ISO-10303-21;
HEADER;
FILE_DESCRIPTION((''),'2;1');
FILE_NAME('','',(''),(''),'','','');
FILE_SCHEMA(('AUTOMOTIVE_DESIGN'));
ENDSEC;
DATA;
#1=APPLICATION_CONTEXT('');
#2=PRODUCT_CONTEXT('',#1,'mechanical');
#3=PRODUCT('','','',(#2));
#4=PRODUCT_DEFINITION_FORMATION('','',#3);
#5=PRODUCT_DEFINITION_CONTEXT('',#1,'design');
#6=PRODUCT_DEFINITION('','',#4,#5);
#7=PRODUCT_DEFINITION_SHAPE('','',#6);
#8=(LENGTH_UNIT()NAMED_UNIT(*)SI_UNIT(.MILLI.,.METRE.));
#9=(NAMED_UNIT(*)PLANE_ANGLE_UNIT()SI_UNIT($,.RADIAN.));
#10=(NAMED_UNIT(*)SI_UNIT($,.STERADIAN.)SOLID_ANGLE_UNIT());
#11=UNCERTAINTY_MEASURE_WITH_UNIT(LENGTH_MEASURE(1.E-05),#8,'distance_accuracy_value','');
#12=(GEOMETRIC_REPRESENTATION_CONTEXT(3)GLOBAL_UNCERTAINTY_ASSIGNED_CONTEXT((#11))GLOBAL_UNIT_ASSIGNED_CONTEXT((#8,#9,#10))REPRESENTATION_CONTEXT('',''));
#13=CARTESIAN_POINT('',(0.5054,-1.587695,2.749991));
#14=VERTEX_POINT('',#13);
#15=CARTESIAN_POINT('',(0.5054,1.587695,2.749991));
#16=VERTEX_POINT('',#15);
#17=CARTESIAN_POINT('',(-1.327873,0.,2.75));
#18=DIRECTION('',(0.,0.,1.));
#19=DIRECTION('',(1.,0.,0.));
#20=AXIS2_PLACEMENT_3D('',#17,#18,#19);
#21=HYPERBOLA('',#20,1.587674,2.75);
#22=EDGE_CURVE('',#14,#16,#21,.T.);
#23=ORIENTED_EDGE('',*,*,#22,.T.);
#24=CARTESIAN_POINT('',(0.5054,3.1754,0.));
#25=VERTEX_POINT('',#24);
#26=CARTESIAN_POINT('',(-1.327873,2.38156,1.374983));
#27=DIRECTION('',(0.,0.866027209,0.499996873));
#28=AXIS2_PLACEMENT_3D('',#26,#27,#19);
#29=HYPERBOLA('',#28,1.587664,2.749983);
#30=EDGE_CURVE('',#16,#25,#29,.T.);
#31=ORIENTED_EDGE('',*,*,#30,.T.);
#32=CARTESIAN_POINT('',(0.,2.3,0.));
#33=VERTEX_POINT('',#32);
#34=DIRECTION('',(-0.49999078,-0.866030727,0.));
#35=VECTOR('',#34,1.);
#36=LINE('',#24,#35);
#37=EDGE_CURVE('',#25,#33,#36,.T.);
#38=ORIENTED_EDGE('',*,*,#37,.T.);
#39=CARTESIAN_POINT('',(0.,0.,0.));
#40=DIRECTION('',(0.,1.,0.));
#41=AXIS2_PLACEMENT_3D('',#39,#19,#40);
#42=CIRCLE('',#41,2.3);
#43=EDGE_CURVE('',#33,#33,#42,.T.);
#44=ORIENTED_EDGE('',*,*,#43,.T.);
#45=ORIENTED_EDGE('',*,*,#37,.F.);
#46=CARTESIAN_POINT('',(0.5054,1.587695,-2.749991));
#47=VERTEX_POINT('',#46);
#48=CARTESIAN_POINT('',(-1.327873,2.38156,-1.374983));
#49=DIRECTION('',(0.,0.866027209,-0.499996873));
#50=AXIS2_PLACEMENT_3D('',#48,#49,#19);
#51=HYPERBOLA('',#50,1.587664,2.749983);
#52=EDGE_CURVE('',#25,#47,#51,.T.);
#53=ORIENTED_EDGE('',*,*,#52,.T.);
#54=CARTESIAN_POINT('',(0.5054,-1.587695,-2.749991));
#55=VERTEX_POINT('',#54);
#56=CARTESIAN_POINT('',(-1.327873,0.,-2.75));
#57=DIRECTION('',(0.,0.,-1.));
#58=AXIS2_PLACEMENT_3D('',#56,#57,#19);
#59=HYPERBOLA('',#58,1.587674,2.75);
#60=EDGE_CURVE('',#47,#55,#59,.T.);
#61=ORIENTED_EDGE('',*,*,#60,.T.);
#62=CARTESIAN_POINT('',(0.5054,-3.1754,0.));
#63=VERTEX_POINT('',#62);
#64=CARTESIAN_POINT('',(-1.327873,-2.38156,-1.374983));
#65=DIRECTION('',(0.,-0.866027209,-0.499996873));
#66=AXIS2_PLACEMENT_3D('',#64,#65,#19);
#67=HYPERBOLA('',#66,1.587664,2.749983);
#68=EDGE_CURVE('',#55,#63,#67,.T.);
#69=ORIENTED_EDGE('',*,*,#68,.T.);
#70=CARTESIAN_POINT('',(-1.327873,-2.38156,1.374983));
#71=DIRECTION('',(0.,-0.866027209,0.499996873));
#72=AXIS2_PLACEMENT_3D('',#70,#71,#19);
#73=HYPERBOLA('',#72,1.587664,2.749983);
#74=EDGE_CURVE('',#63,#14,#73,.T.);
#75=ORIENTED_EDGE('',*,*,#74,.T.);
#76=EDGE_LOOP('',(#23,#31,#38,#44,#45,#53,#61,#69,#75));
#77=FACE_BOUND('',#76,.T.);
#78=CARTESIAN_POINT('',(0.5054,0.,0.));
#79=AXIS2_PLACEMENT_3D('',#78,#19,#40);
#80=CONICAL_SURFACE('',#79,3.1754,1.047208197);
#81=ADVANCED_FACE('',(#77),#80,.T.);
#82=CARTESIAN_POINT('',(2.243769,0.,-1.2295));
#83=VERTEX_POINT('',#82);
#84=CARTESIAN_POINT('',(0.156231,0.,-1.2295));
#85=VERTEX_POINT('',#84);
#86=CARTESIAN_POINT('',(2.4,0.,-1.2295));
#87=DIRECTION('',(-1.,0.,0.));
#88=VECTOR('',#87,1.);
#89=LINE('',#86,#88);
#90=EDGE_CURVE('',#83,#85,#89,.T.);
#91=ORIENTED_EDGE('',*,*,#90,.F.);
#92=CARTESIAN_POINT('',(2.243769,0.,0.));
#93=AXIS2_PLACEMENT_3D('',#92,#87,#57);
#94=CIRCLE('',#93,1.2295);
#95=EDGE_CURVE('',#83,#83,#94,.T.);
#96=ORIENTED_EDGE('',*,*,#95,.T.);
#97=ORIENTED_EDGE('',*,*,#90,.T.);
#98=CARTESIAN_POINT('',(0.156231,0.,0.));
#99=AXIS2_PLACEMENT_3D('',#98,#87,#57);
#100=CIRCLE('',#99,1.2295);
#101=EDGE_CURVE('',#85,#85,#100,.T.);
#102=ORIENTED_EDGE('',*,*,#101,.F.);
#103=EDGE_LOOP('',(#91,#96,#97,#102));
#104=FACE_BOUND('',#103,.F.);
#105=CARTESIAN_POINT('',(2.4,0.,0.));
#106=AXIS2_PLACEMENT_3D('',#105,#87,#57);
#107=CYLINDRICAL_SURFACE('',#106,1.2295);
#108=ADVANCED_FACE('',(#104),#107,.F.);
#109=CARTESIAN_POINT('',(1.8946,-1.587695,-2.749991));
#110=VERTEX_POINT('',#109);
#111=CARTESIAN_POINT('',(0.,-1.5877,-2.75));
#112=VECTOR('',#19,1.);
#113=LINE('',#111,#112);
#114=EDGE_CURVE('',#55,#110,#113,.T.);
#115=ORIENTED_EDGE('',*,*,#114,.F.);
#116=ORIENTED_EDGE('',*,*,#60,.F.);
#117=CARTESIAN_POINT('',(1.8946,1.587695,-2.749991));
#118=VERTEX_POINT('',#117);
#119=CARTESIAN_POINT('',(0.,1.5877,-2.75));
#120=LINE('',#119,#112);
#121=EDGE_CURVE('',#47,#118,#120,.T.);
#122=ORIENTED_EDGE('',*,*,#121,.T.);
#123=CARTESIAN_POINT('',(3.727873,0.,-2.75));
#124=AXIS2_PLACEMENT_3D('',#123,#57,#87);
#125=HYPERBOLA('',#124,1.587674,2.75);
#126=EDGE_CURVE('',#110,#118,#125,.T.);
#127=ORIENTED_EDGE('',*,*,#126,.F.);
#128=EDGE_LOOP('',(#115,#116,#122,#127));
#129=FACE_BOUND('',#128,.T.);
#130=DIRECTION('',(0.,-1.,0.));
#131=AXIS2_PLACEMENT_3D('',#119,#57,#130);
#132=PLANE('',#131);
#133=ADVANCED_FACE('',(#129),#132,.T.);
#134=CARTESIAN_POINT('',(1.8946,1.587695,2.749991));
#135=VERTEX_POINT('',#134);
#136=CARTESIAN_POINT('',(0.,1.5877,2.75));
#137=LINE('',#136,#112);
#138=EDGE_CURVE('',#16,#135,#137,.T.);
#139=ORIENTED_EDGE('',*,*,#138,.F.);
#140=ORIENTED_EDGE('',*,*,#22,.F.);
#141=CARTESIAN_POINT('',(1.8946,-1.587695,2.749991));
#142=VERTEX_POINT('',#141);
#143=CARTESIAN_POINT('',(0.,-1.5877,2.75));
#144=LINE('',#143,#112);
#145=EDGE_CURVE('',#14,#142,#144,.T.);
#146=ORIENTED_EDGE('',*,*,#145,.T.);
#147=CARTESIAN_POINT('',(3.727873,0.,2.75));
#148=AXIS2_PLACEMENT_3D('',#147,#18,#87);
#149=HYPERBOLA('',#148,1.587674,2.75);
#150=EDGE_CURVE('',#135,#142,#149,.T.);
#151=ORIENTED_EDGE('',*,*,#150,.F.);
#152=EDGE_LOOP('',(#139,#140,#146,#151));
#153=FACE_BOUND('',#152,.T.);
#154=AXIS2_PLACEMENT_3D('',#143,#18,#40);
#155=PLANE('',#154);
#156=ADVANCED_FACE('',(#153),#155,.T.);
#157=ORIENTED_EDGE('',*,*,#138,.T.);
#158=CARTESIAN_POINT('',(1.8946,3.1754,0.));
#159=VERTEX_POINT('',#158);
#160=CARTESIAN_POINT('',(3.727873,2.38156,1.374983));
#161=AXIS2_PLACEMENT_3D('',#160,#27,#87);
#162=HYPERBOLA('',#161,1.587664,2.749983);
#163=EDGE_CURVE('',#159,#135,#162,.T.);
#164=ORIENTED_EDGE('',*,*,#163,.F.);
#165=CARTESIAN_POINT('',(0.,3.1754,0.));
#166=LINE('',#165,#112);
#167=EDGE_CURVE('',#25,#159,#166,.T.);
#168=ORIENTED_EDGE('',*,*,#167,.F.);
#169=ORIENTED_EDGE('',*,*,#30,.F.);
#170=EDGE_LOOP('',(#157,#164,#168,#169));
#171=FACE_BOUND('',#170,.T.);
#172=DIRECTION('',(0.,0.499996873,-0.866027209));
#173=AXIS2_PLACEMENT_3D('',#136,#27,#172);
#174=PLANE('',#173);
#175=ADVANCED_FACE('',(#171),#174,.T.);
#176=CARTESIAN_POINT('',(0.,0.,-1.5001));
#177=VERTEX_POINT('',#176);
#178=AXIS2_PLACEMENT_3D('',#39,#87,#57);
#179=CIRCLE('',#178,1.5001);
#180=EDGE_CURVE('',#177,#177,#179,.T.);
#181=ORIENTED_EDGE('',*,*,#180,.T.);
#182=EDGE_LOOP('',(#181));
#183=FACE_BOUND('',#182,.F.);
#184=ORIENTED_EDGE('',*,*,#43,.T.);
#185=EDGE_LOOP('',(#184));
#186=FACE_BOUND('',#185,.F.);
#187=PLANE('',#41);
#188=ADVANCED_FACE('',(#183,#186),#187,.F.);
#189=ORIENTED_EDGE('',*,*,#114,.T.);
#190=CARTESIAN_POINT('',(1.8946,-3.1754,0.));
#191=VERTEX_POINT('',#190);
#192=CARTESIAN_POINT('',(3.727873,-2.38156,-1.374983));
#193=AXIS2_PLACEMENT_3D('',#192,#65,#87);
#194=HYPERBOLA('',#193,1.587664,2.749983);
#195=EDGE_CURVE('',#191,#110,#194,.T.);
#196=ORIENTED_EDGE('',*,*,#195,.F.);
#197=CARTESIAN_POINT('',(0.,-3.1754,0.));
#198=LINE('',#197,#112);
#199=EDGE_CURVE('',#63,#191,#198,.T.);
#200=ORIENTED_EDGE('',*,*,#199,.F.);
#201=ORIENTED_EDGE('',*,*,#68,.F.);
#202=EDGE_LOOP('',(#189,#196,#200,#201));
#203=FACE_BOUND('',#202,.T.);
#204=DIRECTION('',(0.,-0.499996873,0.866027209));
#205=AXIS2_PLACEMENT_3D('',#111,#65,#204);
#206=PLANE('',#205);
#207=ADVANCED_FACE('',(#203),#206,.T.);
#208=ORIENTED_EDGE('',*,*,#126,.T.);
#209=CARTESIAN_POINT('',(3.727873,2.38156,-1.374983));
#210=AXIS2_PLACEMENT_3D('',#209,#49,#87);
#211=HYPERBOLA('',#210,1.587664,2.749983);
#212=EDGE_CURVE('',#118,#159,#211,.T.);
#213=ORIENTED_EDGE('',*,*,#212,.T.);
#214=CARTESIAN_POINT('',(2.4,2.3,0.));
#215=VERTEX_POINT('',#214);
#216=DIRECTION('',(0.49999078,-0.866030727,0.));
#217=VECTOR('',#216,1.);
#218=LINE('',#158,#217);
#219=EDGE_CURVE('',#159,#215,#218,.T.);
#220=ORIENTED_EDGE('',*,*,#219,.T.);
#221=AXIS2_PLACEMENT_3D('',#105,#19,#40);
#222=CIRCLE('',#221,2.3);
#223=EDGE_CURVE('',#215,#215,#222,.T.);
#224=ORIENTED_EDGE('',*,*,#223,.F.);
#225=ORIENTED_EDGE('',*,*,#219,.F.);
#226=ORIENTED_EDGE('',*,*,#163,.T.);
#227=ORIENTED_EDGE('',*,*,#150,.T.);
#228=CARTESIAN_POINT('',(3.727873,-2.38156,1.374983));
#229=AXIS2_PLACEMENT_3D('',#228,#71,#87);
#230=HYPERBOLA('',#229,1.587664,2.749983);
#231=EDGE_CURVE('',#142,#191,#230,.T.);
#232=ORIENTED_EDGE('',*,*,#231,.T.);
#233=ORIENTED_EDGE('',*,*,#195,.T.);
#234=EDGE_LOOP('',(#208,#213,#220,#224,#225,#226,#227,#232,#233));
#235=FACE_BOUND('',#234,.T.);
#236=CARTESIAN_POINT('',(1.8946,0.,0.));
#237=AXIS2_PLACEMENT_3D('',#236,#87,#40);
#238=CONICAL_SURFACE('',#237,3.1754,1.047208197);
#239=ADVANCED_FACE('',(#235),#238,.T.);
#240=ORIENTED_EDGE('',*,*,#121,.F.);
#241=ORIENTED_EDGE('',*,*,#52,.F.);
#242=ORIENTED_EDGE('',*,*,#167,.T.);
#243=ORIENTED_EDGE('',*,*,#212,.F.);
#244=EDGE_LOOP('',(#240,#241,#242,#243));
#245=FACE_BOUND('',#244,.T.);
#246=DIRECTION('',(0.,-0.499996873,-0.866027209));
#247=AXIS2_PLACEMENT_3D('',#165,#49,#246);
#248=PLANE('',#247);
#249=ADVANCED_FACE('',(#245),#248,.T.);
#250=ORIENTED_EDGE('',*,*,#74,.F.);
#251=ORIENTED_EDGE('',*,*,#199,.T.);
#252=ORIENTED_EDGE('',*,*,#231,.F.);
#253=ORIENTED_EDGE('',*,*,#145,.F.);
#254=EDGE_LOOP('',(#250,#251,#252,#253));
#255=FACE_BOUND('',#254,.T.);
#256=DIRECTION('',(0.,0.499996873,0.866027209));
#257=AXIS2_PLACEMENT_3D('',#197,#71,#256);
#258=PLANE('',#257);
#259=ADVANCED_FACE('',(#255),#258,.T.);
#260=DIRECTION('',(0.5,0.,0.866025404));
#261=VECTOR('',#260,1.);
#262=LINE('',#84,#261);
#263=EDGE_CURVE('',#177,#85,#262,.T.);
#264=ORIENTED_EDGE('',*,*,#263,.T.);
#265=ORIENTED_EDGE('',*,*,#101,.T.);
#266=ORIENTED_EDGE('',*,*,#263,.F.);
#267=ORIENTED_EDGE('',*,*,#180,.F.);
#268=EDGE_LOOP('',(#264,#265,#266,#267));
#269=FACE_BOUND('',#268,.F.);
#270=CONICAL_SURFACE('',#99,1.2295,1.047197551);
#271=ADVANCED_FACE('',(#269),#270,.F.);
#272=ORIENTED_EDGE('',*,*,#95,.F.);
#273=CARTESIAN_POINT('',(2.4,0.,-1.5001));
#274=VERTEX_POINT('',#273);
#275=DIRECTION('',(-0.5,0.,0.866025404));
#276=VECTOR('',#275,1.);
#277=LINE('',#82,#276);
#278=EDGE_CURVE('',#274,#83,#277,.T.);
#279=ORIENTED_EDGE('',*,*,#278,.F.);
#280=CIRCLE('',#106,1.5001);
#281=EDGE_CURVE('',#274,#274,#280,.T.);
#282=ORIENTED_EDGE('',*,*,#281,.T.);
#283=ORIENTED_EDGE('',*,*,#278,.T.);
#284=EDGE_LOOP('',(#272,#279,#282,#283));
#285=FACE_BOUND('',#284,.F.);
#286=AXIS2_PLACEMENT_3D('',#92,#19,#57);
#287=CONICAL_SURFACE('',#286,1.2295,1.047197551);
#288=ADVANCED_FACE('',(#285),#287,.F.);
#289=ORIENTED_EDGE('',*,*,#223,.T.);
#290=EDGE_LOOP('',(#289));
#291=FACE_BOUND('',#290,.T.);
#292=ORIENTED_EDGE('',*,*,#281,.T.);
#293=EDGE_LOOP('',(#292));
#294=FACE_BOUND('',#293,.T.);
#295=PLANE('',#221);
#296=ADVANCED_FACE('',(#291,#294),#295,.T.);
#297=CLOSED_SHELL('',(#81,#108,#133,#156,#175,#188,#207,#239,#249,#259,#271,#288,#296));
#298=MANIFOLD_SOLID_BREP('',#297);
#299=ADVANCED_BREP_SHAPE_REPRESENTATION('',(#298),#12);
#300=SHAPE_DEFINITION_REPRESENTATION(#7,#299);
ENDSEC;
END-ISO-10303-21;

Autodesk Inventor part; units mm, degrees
ref_plane "YZ Plane" through (0, 0, 0) normal (1, 0, 0) x (0, 1, 0)
ref_plane "XZ Plane" through (0, 0, 0) normal (0, 1, 0) x (-1, 0, 0)
sketch "Szkic1" plane through (0, 0, 0) normal (1, 0, 0) x (0, 1, 0)
  line L0 (-3.1754, 0) -> (-1.5877, 2.75)
  line L1 (-1.5877, 2.75) -> (1.5877, 2.75)
  line L2 (1.5877, 2.75) -> (3.1754, 0)
  line L3 (3.1754, 0) -> (1.5877, -2.75)
  line L4 (1.5877, -2.75) -> (-1.5877, -2.75)
  line L5 (-1.5877, -2.75) -> (-3.1754, 0)
  point P0 (0, 0)
  point P1 (0, 0)
  dimension "d0" = 6.3509
extrude "Bryła" add sketch "Szkic1" along normal blind 2.4
sketch "Szkic2" plane through (0, 0, 0) normal (0, 0, 1) x (1, 0, 0)
  line L0 (0, 1.5877) -> (0, 3.1754) projected
  line L1 (0, 3.1754) -> (2.4, 3.1754) projected
  line L2 (2.4, 1.5877) -> (2.4, 3.1754) projected
  line L3 (-0.48, 0) -> (2.88, 0) projected
  line L4 (0.5054, 3.1754) -> (0, 2.3)
  line L5 (1.8946, 3.1754) -> (2.4, 2.3)
  dimension "d3" = 30
  dimension "d4" = 30
  dimension "d5" = 4.6
  dimension "d6" = 4.6
revolve "Faza1" cut sketch "Szkic2" angle 360 about axis through (-10, 0, 0) along (1, 0, 0)
sketch "Szkic3" plane through (2.4, 0, 0) normal (1, 0, 0) x (0, 0, -1)
  arc A0 (-0.625, -1.0825) -> (0.625, -1.0825) centre (0, 0) ccw projected
hole "Gwint" at (2.4, 0, 0) direction (-1, 0, 0) diameter 2.459 end through all thread size "M3x0.5" class "6H" standard "ISO Metric profile"
chamfer "Faza2" distance 0.2706 angle 30 1 edges at (2.4, 0, 1.2295) measured on face at (2.4, 1.9179, -0.2329)
chamfer "Faza3" distance 0.2706 angle 30 1 edges at (0, 0, 1.2295) measured on face at (0, 1.9179, -0.2329)
ref_plane "Work Plane1" through (-6.3375, 0, 0) normal (0, -0.8660254, -0.5) x (1, 0, 0)
equation "\"d0\" = 1.1547 * SW"
equation "\"d1\" = KOH"
equation "\"d3\" = ANG1"
equation "\"d4\" = ANG2"
equation "\"d5\" = SW0"
equation "\"d6\" = SW01"
equation "\"d8\" = -0.5 * GD1 + 0.5 * NND"
equation "\"d40\" = -0.5 * GD1 + 0.5 * NND"
equation "\"d10\" = -0.5 * GD1 + 0.5 * NND"
equation "\"d41\" = -0.5 * GD1 + 0.5 * NND"
equation "\"ANG1\" = 30deg"
equation "\"ANG2\" = 30deg"
equation "\"NND\" = 3"
equation "\"KOH\" = 2.4"
equation "\"SW\" = 5.5"
equation "\"SW0\" = 4.6"
equation "\"SW01\" = 4.6"
equation "\"GUL\" = 0.541266 * PTC"
equation "\"THREADDIA\" = 3"
equation "\"TOA\" = 30deg"
equation "\"PTC\" = 0.5"
equation "\"E0\" = 1.155 * SW"
equation "\"GAL\" = 0.541266 * PTC"
equation "\"GD1\" = 2.458734"
properties part number "ISO 4032 - M3" material "Stal nierdzewna 440C"
